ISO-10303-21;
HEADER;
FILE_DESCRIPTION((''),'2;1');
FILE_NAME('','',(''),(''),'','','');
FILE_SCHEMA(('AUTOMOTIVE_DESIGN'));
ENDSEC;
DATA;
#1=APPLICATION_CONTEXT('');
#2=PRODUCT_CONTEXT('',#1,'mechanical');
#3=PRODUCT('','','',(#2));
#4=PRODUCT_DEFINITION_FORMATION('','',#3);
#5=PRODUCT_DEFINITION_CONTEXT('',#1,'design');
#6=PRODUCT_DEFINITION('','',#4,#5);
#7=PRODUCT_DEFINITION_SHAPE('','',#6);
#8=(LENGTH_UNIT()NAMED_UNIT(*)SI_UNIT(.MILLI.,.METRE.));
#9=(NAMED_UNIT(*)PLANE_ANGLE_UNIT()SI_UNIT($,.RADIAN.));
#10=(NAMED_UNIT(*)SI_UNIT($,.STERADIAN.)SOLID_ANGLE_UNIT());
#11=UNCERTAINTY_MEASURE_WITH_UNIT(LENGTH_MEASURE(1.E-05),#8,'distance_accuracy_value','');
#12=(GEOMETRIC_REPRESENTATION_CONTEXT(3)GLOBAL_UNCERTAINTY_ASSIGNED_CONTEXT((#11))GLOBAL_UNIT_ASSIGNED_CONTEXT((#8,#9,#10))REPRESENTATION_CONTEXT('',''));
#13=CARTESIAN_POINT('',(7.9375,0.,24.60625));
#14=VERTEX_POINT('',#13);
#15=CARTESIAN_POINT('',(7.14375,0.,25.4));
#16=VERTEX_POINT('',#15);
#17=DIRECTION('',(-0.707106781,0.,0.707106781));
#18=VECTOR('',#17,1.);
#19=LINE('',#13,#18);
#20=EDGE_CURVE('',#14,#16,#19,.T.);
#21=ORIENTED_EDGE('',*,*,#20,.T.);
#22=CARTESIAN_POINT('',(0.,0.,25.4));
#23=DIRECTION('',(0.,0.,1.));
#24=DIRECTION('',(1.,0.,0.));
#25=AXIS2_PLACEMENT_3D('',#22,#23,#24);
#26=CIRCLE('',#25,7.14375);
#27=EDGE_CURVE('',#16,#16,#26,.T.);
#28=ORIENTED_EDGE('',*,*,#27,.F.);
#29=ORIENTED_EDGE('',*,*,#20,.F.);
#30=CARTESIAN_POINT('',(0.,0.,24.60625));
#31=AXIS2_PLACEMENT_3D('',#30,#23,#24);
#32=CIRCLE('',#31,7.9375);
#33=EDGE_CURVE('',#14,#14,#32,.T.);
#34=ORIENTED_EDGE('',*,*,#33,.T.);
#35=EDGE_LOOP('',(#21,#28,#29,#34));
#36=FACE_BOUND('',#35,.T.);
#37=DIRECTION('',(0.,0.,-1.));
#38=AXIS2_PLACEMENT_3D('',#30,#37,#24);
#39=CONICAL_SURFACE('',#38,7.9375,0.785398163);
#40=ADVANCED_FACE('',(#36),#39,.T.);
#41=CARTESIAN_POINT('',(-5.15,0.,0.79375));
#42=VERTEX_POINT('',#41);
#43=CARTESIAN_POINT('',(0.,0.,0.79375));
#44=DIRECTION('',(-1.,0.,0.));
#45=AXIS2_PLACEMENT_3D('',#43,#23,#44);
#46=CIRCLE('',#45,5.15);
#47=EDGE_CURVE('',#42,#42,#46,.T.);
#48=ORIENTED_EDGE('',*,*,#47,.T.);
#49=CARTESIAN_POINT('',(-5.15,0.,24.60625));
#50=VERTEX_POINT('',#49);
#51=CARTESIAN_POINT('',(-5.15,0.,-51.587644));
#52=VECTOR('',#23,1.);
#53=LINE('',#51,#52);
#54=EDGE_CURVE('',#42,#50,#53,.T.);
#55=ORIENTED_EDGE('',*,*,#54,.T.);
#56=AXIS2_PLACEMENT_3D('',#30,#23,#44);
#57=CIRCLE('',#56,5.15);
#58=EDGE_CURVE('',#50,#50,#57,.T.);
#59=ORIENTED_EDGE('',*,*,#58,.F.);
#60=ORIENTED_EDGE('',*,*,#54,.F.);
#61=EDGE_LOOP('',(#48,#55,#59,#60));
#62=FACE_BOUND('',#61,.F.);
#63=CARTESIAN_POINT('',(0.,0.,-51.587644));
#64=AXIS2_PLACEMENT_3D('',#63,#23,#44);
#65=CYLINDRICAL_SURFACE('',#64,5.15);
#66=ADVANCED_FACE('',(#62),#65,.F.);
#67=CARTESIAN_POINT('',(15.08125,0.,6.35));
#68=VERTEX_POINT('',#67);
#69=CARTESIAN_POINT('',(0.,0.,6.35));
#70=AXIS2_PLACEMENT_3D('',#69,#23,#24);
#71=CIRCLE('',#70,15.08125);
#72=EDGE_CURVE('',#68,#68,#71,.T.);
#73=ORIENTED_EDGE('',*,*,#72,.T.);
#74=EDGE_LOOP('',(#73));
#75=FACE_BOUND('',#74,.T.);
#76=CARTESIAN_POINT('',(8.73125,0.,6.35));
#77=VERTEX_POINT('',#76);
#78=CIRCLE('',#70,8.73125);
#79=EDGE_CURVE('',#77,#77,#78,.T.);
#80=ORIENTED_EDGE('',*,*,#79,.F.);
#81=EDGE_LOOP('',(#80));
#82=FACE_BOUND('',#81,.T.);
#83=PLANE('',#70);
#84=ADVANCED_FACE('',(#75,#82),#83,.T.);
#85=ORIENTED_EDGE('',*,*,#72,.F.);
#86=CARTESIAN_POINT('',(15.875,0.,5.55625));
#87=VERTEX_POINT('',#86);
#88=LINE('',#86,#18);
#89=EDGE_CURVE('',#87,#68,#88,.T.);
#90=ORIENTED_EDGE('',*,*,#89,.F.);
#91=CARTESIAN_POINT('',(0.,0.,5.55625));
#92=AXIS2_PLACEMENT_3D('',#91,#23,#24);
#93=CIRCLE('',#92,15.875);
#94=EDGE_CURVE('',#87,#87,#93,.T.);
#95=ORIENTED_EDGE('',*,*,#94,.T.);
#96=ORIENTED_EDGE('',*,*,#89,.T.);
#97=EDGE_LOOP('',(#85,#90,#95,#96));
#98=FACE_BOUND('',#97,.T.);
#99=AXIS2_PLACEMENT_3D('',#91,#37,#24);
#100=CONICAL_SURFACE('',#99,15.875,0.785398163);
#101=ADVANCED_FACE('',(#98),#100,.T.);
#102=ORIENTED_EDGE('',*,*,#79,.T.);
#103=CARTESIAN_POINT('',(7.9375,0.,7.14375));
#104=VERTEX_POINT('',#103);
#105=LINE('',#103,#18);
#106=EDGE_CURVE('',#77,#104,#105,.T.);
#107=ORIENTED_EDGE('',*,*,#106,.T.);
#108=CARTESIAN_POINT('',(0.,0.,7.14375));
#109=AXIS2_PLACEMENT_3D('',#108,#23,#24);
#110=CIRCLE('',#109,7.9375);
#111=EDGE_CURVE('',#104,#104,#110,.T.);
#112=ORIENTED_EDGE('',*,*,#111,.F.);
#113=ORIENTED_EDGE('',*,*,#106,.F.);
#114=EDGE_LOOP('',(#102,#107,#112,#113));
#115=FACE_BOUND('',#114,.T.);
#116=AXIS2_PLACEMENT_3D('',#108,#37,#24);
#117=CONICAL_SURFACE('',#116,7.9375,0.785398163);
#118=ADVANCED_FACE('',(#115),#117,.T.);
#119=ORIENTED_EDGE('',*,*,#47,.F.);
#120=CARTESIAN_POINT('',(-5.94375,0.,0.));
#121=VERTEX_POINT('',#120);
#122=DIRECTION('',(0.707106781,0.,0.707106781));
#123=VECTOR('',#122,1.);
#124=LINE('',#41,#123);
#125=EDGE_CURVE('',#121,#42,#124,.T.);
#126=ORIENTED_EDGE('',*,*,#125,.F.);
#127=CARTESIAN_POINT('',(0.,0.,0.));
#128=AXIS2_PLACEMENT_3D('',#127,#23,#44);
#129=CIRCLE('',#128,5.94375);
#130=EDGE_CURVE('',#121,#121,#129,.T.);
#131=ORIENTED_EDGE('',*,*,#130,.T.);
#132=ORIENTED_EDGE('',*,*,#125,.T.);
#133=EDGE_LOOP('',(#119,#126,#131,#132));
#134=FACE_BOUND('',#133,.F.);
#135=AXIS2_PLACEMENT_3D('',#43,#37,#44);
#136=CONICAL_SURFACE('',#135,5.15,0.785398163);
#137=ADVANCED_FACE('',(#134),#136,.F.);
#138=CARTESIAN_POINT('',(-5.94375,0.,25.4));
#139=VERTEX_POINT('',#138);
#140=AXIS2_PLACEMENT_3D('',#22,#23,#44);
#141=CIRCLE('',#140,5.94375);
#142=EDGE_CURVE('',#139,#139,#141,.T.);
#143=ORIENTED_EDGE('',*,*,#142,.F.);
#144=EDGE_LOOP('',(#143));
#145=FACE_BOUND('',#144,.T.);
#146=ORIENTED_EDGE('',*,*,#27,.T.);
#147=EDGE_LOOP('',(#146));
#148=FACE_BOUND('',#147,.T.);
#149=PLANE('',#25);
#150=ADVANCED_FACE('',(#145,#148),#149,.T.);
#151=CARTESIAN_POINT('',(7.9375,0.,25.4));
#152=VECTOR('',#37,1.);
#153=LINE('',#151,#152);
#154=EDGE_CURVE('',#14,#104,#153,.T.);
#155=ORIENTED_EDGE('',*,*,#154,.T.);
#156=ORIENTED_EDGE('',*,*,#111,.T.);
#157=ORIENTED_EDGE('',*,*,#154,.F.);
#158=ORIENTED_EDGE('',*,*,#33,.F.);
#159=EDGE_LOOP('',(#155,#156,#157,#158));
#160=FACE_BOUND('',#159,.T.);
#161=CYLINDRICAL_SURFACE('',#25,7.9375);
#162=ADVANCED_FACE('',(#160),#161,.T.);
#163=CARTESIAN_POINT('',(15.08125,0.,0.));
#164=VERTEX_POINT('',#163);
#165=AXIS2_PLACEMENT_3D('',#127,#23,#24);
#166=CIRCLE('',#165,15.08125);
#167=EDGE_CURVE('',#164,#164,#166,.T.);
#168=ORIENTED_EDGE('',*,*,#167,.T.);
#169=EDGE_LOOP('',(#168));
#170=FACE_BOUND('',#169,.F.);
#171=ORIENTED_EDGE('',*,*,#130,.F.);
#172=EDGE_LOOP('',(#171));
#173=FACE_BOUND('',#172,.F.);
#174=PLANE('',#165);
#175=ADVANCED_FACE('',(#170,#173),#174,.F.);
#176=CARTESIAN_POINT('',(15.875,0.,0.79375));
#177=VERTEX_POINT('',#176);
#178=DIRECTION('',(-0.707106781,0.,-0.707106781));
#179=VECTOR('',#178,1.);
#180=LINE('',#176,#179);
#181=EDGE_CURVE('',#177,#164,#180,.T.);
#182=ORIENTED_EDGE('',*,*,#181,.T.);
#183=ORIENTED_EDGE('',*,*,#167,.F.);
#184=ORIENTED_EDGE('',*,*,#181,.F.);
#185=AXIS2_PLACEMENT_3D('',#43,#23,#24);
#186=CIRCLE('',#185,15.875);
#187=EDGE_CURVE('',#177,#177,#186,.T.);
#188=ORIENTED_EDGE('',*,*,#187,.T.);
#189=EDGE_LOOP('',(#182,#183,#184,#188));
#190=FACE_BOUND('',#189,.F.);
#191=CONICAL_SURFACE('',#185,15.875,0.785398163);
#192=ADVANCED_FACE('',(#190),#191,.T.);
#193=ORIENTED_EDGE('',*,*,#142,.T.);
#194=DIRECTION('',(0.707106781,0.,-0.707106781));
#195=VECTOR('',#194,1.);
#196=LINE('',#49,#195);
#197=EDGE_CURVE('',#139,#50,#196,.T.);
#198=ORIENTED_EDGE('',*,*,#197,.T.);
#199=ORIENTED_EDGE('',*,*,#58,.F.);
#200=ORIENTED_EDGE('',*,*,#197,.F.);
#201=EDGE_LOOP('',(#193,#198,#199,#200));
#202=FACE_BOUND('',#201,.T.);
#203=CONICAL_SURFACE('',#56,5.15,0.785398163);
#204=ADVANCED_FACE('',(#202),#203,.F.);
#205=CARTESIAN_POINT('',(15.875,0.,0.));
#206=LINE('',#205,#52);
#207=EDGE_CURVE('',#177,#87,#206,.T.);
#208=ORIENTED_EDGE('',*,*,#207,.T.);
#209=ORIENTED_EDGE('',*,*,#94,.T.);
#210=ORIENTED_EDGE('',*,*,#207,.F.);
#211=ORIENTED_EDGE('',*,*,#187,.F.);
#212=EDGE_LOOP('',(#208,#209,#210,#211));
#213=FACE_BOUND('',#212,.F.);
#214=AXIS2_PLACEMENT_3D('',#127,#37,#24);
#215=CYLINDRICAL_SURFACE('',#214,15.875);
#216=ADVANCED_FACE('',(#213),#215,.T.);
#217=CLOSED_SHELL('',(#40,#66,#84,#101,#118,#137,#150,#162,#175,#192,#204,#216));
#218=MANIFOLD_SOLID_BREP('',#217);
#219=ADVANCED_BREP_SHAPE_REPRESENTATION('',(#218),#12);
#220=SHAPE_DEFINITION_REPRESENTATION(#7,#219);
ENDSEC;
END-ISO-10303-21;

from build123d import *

# Parameters (mm, degrees)
F0_R     = 15.875
F1_DEPTH = 25.4
F2_D     = 10.3
F3_SIZE  = 0.79375
F4_SIZE  = 0.79375
F5_R     = 15.875
F5_R_2   = 7.9375
F6_DEPTH = 19.05
F7_SIZE  = 0.79375


with BuildPart() as f1:
    # F0 (on Top) → F1 (new body)
    with BuildSketch(Plane.XY):
        Circle(F0_R)
    extrude(amount=F1_DEPTH)

    # F2 (through all)
    with Locations(Plane(origin=(0, 0, 0), x_dir=(1, 0, 0), z_dir=(0, 0, -1))):
        with Locations((0, 0)):
            Hole(F2_D / 2)

    # F3
    f3_edges = [f1.edges().sort_by_distance(p)[0] for p in [
        (-15.875, 0, 0),
    ]]
    chamfer(f3_edges, length=F3_SIZE)

    # F4
    f4_edges = [f1.edges().sort_by_distance(p)[0] for p in [
        (-15.875, 0, 25.4),
        (-5.15, 0, 25.4),
        (-5.15, 0, 0),
    ]]
    chamfer(f4_edges, length=F4_SIZE)

    # F5 (on face) → F6 (cut)
    with BuildSketch(Plane.XY.offset(25.4)):
        Circle(F5_R)
        Circle(F5_R_2, mode=Mode.SUBTRACT)
    extrude(amount=-F6_DEPTH, mode=Mode.SUBTRACT)

    # F7
    f7_edges = [f1.edges().sort_by_distance(p)[0] for p in [
        (-15.875, 0, 6.35),
        (-7.9375, 0, 6.35),
        (-7.9375, 0, 25.4),
    ]]
    chamfer(f7_edges, length=F7_SIZE)


solid = f1.part
